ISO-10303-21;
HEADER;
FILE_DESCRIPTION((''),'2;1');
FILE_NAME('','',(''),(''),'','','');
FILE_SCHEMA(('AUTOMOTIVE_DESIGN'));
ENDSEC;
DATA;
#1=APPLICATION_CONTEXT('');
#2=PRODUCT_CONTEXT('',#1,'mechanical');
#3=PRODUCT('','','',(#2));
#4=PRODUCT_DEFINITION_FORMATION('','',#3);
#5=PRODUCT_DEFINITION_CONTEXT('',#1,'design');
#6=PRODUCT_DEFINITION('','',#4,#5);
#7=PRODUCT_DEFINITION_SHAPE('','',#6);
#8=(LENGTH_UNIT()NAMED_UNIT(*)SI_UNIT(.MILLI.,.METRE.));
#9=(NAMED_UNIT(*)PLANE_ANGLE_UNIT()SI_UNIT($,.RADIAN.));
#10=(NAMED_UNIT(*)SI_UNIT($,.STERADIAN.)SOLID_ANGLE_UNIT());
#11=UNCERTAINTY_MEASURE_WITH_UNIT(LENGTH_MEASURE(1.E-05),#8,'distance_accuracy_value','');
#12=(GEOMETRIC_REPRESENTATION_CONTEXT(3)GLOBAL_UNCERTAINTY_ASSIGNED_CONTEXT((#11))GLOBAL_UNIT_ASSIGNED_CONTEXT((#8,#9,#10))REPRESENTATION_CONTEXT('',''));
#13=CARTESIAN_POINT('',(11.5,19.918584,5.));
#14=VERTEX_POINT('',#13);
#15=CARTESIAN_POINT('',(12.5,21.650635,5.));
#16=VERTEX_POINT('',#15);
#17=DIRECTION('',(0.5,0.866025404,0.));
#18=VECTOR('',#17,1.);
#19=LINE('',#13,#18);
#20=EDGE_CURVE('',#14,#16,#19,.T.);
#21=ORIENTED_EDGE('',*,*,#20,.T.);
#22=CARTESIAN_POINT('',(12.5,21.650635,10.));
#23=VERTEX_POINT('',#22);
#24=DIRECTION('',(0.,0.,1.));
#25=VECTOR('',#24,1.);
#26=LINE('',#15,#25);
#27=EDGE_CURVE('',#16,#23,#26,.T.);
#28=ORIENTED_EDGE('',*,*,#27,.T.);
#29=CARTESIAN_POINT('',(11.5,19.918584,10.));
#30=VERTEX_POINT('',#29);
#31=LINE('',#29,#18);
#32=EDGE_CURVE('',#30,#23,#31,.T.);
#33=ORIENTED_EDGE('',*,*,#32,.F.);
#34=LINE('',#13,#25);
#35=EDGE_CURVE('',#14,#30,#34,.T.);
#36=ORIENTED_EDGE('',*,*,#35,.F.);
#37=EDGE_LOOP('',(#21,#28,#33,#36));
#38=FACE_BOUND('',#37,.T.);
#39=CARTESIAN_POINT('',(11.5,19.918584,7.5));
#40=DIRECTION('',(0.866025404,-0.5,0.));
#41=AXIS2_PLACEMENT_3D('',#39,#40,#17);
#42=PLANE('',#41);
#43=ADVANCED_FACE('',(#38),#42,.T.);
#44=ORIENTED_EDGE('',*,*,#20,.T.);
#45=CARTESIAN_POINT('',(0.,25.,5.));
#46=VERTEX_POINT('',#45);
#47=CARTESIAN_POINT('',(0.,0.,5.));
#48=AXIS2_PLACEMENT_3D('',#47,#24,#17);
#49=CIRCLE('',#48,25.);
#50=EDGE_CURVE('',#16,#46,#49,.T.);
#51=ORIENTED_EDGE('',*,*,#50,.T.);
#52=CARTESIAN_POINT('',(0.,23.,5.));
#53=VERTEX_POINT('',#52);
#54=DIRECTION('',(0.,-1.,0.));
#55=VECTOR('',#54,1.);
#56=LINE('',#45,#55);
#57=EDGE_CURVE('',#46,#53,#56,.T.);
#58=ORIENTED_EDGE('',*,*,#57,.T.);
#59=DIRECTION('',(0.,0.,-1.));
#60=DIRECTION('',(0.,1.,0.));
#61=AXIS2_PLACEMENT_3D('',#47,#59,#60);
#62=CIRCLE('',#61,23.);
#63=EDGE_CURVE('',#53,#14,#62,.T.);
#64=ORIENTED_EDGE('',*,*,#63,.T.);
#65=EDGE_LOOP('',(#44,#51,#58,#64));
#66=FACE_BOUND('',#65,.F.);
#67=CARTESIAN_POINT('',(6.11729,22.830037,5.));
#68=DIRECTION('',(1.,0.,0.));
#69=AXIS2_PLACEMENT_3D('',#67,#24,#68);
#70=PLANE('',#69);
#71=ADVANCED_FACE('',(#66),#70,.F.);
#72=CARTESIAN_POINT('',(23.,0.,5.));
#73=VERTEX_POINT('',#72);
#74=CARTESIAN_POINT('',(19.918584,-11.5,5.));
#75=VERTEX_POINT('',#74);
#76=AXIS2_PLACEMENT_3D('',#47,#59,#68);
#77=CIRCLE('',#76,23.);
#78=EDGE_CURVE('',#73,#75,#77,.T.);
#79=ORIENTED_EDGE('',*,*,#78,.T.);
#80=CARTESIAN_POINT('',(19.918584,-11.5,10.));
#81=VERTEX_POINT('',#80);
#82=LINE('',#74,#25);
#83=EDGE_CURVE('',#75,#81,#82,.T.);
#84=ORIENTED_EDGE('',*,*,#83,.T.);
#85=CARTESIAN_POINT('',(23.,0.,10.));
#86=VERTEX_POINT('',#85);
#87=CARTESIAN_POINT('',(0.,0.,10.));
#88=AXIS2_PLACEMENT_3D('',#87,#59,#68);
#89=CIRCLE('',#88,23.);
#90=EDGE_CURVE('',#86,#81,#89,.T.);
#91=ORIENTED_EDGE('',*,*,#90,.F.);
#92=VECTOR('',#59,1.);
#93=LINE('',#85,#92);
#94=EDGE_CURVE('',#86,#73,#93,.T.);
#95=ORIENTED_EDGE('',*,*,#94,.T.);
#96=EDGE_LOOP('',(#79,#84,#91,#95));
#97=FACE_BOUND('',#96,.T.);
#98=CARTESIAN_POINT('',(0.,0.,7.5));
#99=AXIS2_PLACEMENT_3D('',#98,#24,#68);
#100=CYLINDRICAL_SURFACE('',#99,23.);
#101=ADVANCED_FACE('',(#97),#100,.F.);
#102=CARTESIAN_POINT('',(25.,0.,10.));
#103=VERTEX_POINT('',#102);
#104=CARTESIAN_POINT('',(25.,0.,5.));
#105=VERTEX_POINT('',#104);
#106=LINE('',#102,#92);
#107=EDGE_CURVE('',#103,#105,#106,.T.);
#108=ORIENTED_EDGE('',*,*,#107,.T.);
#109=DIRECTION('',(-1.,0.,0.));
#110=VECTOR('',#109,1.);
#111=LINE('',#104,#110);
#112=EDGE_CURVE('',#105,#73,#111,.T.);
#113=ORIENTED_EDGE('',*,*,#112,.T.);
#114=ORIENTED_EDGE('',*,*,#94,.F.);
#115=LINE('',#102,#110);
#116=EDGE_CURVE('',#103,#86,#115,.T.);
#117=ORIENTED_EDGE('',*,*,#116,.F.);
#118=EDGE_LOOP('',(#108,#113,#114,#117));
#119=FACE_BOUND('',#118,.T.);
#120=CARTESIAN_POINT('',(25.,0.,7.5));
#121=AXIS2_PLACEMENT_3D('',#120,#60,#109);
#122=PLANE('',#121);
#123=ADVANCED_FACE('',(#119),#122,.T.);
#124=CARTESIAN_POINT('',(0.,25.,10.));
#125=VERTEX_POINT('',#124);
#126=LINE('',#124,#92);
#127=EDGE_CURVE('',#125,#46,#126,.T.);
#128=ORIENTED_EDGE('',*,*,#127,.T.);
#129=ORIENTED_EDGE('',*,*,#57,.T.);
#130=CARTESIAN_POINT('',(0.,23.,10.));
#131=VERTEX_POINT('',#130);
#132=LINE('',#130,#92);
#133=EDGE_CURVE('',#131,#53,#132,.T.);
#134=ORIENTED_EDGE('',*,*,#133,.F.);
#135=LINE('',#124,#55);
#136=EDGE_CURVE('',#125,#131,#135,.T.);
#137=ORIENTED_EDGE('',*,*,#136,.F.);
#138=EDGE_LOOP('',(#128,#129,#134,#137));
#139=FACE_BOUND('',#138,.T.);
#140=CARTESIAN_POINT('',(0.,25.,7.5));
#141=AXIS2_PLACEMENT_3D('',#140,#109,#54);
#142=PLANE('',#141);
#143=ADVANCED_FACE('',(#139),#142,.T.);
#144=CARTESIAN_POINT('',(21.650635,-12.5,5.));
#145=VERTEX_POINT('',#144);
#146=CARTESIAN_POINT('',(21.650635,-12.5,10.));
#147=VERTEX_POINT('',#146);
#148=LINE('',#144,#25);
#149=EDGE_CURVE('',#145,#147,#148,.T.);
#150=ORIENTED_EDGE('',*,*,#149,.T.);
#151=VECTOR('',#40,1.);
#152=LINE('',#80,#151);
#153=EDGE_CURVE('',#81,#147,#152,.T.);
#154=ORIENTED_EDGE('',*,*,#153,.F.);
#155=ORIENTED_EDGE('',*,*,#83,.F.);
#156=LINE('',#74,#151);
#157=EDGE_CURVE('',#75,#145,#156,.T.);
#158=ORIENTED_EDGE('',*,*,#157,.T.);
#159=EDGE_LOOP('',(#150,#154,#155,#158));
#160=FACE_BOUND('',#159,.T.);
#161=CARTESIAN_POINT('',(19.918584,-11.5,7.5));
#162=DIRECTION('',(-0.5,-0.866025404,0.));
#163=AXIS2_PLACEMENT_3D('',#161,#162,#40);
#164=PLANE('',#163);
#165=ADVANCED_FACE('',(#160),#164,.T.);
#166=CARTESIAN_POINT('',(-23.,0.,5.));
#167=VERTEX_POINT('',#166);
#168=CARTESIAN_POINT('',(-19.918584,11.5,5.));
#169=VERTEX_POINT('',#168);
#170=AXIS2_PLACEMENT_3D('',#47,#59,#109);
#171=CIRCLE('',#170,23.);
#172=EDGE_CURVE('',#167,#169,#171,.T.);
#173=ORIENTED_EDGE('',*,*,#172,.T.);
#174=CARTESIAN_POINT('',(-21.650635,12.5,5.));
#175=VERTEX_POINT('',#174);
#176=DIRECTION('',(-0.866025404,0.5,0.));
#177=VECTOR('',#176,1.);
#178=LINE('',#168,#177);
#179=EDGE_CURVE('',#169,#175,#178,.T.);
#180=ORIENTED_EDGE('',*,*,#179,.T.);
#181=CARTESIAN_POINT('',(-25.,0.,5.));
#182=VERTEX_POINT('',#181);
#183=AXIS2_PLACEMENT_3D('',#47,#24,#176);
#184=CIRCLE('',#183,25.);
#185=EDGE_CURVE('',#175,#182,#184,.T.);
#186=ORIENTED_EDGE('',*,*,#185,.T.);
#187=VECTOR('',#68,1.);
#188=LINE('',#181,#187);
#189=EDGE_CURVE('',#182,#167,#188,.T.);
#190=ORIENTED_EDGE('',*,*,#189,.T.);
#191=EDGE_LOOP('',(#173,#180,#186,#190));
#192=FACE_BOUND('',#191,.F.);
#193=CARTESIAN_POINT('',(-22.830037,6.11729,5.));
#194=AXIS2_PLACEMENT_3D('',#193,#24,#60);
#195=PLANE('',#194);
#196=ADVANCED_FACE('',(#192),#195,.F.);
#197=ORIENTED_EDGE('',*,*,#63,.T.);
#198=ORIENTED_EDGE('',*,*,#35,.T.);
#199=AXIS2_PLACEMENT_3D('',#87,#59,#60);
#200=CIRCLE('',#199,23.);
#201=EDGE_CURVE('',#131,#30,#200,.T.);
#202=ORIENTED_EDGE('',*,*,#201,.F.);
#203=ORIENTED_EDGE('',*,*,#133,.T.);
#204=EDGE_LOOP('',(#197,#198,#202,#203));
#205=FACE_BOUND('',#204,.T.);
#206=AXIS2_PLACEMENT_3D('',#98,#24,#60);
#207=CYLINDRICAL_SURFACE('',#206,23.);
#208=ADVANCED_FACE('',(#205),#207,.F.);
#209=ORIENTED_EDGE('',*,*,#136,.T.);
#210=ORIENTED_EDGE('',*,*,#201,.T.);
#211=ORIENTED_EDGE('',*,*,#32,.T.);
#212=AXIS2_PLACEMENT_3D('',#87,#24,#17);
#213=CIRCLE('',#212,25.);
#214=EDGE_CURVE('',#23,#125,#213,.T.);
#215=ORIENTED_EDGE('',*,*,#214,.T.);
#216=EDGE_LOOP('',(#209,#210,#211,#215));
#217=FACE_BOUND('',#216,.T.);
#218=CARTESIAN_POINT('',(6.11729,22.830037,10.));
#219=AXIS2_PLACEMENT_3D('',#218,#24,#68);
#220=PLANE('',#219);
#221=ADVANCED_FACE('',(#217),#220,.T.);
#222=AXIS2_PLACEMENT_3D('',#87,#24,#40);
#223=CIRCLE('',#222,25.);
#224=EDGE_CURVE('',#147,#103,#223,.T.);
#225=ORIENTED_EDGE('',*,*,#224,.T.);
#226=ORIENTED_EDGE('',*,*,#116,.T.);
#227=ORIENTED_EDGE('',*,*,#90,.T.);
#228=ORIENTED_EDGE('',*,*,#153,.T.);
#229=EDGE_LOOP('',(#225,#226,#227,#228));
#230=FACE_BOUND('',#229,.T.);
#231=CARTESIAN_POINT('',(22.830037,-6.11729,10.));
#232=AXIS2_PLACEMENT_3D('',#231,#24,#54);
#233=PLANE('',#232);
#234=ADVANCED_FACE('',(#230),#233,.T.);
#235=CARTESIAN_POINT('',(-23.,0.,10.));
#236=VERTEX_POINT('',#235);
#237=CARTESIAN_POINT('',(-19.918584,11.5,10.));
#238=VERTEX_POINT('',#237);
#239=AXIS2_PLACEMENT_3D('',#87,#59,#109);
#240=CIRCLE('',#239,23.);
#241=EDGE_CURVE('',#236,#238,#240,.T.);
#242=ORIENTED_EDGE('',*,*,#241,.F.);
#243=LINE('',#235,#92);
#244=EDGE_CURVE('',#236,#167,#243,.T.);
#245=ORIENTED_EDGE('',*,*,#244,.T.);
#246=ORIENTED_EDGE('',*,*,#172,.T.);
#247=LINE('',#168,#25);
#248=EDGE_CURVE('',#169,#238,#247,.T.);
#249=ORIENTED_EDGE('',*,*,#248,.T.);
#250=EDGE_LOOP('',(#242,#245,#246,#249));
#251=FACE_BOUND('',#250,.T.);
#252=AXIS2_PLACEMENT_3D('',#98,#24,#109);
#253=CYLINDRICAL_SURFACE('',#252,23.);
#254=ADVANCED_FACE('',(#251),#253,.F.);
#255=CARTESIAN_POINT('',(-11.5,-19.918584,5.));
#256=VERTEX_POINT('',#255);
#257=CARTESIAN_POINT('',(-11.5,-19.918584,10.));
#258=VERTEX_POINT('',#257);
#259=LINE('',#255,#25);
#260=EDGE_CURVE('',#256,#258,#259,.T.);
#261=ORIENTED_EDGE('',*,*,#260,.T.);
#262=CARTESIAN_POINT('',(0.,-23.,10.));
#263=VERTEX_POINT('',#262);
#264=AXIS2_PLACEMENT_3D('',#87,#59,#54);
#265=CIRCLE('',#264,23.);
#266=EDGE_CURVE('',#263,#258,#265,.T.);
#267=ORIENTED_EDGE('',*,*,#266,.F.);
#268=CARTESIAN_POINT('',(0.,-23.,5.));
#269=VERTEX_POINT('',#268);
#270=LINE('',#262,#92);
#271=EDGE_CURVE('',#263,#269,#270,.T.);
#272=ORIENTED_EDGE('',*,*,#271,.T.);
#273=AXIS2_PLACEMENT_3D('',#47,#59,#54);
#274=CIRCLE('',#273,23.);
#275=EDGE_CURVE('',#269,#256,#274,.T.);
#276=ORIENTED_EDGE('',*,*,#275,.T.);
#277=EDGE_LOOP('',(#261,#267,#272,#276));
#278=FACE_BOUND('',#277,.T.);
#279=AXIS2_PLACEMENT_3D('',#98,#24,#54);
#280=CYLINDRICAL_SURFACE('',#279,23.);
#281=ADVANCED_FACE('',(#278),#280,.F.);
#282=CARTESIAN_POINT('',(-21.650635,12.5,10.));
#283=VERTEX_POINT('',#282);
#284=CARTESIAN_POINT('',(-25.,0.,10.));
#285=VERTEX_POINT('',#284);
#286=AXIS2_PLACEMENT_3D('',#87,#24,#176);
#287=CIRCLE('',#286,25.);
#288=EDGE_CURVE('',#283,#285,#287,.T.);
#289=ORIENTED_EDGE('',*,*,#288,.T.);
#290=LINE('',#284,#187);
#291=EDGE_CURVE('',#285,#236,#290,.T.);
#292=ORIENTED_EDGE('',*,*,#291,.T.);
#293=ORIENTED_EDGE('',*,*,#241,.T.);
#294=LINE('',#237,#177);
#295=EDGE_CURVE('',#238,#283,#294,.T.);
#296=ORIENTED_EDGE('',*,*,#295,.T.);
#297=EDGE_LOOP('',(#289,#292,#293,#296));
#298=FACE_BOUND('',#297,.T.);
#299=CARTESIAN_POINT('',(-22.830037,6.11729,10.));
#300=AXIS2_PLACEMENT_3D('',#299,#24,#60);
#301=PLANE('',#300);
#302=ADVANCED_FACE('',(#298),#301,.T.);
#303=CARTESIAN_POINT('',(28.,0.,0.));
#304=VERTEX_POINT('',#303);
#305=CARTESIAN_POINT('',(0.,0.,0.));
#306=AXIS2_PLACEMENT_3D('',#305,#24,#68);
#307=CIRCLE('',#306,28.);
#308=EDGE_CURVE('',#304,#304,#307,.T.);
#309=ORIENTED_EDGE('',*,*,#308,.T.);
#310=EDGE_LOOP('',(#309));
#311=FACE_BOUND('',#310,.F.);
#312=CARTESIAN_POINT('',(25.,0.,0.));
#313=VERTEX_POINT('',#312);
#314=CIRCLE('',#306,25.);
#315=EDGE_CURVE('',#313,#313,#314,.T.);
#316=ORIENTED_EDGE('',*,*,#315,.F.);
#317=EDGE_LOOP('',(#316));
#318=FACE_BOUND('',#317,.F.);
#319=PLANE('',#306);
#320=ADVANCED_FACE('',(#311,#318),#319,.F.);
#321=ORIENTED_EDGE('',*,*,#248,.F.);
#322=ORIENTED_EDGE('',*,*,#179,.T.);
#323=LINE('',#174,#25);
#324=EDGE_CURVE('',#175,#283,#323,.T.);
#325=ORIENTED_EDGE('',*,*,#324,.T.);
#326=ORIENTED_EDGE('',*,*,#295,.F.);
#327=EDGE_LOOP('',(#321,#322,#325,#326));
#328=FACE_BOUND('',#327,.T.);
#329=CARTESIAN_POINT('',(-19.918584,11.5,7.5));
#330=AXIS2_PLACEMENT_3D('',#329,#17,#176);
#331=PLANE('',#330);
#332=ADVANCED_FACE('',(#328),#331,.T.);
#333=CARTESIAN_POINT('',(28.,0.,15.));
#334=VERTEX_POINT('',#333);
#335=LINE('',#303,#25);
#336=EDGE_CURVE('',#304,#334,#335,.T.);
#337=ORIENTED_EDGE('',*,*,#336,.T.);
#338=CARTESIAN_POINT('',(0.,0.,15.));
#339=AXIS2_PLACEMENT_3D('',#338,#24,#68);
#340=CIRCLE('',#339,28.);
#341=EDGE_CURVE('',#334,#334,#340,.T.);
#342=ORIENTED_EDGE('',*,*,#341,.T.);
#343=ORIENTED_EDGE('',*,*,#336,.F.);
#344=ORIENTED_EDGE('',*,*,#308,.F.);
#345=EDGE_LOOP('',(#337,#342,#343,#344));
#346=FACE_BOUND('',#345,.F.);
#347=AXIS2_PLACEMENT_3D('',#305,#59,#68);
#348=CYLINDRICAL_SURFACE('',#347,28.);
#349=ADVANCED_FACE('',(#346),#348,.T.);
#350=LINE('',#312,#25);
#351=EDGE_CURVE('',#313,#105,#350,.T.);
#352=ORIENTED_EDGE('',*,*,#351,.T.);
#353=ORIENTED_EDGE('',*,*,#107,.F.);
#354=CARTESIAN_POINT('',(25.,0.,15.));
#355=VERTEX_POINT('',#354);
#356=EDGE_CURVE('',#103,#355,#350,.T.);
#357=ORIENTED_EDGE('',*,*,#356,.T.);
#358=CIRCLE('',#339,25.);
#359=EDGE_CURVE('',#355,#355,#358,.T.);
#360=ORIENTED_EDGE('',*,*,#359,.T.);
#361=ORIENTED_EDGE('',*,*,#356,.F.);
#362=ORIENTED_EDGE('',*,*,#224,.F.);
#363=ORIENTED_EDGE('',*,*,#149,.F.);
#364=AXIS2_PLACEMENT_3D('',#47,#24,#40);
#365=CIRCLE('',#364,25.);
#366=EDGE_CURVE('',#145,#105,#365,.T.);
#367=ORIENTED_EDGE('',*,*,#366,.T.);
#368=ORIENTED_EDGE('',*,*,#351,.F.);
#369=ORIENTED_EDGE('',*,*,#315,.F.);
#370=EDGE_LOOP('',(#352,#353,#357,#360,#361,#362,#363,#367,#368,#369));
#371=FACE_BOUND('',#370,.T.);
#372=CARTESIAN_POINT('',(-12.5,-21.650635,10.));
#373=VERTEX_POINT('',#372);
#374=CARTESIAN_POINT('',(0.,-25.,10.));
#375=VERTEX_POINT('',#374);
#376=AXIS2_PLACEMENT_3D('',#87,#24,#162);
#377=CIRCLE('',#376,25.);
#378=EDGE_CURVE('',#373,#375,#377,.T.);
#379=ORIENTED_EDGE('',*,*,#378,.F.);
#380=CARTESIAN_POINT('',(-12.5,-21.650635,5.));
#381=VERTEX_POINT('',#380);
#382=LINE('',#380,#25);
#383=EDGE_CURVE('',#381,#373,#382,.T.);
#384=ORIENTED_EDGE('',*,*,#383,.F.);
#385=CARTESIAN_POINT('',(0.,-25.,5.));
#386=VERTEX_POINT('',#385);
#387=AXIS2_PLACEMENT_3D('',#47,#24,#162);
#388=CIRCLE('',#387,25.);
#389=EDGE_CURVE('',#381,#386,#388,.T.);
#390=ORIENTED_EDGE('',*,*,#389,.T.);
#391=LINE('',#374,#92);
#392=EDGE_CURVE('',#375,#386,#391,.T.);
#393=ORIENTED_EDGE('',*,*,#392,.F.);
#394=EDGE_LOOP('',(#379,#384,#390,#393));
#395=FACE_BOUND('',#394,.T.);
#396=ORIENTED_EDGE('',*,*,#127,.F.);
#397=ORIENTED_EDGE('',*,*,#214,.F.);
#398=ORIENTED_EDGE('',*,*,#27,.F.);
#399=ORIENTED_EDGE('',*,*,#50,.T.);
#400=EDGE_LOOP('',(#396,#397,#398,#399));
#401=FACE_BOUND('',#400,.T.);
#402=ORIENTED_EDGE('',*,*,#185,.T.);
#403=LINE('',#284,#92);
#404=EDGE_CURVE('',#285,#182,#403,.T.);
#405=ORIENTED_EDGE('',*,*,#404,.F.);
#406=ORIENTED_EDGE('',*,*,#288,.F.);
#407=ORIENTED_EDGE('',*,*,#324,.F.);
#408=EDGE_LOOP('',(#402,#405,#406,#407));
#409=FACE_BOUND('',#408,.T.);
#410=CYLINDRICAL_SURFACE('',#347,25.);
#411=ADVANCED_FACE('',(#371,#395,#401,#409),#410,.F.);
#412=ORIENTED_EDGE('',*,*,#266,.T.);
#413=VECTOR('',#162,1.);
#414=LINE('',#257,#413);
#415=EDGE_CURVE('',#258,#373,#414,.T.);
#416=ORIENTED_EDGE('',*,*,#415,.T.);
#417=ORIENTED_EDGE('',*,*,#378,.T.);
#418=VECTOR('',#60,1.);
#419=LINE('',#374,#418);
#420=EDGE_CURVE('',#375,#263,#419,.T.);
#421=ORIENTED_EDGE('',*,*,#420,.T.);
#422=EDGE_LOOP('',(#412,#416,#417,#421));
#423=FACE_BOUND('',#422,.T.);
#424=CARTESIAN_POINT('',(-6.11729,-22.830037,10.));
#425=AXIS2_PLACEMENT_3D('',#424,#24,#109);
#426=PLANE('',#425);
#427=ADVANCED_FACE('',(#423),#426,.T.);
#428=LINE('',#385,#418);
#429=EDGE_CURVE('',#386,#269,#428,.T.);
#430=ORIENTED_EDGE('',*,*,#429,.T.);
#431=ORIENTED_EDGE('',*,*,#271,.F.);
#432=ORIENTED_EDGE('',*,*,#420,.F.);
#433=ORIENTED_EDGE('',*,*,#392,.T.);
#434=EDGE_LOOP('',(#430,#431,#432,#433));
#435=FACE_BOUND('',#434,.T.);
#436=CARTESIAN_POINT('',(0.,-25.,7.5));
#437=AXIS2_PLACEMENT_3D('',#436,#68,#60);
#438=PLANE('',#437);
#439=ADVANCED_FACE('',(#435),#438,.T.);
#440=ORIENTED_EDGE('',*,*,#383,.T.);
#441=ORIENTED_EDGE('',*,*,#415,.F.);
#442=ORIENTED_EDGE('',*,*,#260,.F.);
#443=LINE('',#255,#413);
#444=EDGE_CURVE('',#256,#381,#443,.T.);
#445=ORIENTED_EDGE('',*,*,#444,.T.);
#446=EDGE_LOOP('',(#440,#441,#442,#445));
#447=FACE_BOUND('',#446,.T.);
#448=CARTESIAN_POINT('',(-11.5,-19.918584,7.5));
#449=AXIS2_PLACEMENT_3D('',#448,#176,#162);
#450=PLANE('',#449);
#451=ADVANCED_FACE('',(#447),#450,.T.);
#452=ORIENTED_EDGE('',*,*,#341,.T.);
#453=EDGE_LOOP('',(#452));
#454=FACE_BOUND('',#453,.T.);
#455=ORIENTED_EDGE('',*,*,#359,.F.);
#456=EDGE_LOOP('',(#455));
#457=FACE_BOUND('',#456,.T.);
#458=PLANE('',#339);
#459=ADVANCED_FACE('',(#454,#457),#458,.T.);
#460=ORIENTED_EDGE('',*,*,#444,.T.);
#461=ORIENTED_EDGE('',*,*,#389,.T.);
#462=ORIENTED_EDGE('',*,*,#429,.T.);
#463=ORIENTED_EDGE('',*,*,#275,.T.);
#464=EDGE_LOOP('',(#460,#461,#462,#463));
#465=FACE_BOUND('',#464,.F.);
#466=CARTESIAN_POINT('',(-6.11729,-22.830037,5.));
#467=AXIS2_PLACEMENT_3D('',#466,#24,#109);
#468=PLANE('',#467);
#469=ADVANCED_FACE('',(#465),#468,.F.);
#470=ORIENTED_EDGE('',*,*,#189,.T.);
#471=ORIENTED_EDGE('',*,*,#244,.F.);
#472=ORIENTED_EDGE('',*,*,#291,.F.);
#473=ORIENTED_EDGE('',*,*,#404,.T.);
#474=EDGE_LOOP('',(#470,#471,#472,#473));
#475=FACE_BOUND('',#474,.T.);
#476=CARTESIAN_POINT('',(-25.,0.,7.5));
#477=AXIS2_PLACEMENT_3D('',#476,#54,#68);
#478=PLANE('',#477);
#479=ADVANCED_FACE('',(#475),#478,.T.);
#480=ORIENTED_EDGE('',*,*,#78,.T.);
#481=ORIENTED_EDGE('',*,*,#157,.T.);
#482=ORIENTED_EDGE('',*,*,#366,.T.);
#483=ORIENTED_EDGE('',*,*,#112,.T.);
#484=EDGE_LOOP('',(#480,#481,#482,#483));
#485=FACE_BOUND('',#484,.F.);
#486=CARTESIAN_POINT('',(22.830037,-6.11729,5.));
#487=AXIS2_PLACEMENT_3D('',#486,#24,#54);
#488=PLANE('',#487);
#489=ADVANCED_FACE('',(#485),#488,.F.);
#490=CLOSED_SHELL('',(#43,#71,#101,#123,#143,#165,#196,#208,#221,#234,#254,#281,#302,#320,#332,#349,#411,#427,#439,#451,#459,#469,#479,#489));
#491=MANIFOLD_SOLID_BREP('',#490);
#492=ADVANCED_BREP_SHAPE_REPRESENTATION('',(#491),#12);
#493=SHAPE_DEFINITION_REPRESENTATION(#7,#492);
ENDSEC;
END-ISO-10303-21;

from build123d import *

# Parameters (mm, degrees)
F0_R            = 28
F0_R_2          = 25
F1_DEPTH        = 15
F4_DEPTH        = 2.5
F4_COPIES_COUNT = 4


# Not quite as in the source:
# - a pattern or mirror of a feature is missing from the dataset's text; its kind, count and spacing are read off the source's solid


with BuildPart() as f1:
    # F0 (on Top) → F1 (new body)
    with BuildSketch(Plane.XY):
        Circle(F0_R)
        Circle(F0_R_2, mode=Mode.SUBTRACT)
    extrude(amount=F1_DEPTH)

    # F3 (on offset) → F4 (join, symmetric)
    with BuildSketch(Plane.XY.offset(7.5)):
        with BuildLine():
            ThreePointArc((0, 23), (5.9528380374, 22.2162940046), (11.5, 19.918584287))
            Line((11.5, 19.918584287), (12.5, 21.6506350946))
            ThreePointArc((12.5, 21.6506350946), (6.4704761276, 24.1481456572), (0, 25))
            Line((0, 25), (0, 23))
        make_face()
    f4 = extrude(amount=F4_DEPTH, both=True)

    # F4_copies: F4 ×4 about axis
    f4_copies_axis = Axis((0, 0, 0), (0, 0, 1))
    for i in range(1, F4_COPIES_COUNT):
        add(f4.rotate(f4_copies_axis, i * 360 / F4_COPIES_COUNT))


solid = f1.part
